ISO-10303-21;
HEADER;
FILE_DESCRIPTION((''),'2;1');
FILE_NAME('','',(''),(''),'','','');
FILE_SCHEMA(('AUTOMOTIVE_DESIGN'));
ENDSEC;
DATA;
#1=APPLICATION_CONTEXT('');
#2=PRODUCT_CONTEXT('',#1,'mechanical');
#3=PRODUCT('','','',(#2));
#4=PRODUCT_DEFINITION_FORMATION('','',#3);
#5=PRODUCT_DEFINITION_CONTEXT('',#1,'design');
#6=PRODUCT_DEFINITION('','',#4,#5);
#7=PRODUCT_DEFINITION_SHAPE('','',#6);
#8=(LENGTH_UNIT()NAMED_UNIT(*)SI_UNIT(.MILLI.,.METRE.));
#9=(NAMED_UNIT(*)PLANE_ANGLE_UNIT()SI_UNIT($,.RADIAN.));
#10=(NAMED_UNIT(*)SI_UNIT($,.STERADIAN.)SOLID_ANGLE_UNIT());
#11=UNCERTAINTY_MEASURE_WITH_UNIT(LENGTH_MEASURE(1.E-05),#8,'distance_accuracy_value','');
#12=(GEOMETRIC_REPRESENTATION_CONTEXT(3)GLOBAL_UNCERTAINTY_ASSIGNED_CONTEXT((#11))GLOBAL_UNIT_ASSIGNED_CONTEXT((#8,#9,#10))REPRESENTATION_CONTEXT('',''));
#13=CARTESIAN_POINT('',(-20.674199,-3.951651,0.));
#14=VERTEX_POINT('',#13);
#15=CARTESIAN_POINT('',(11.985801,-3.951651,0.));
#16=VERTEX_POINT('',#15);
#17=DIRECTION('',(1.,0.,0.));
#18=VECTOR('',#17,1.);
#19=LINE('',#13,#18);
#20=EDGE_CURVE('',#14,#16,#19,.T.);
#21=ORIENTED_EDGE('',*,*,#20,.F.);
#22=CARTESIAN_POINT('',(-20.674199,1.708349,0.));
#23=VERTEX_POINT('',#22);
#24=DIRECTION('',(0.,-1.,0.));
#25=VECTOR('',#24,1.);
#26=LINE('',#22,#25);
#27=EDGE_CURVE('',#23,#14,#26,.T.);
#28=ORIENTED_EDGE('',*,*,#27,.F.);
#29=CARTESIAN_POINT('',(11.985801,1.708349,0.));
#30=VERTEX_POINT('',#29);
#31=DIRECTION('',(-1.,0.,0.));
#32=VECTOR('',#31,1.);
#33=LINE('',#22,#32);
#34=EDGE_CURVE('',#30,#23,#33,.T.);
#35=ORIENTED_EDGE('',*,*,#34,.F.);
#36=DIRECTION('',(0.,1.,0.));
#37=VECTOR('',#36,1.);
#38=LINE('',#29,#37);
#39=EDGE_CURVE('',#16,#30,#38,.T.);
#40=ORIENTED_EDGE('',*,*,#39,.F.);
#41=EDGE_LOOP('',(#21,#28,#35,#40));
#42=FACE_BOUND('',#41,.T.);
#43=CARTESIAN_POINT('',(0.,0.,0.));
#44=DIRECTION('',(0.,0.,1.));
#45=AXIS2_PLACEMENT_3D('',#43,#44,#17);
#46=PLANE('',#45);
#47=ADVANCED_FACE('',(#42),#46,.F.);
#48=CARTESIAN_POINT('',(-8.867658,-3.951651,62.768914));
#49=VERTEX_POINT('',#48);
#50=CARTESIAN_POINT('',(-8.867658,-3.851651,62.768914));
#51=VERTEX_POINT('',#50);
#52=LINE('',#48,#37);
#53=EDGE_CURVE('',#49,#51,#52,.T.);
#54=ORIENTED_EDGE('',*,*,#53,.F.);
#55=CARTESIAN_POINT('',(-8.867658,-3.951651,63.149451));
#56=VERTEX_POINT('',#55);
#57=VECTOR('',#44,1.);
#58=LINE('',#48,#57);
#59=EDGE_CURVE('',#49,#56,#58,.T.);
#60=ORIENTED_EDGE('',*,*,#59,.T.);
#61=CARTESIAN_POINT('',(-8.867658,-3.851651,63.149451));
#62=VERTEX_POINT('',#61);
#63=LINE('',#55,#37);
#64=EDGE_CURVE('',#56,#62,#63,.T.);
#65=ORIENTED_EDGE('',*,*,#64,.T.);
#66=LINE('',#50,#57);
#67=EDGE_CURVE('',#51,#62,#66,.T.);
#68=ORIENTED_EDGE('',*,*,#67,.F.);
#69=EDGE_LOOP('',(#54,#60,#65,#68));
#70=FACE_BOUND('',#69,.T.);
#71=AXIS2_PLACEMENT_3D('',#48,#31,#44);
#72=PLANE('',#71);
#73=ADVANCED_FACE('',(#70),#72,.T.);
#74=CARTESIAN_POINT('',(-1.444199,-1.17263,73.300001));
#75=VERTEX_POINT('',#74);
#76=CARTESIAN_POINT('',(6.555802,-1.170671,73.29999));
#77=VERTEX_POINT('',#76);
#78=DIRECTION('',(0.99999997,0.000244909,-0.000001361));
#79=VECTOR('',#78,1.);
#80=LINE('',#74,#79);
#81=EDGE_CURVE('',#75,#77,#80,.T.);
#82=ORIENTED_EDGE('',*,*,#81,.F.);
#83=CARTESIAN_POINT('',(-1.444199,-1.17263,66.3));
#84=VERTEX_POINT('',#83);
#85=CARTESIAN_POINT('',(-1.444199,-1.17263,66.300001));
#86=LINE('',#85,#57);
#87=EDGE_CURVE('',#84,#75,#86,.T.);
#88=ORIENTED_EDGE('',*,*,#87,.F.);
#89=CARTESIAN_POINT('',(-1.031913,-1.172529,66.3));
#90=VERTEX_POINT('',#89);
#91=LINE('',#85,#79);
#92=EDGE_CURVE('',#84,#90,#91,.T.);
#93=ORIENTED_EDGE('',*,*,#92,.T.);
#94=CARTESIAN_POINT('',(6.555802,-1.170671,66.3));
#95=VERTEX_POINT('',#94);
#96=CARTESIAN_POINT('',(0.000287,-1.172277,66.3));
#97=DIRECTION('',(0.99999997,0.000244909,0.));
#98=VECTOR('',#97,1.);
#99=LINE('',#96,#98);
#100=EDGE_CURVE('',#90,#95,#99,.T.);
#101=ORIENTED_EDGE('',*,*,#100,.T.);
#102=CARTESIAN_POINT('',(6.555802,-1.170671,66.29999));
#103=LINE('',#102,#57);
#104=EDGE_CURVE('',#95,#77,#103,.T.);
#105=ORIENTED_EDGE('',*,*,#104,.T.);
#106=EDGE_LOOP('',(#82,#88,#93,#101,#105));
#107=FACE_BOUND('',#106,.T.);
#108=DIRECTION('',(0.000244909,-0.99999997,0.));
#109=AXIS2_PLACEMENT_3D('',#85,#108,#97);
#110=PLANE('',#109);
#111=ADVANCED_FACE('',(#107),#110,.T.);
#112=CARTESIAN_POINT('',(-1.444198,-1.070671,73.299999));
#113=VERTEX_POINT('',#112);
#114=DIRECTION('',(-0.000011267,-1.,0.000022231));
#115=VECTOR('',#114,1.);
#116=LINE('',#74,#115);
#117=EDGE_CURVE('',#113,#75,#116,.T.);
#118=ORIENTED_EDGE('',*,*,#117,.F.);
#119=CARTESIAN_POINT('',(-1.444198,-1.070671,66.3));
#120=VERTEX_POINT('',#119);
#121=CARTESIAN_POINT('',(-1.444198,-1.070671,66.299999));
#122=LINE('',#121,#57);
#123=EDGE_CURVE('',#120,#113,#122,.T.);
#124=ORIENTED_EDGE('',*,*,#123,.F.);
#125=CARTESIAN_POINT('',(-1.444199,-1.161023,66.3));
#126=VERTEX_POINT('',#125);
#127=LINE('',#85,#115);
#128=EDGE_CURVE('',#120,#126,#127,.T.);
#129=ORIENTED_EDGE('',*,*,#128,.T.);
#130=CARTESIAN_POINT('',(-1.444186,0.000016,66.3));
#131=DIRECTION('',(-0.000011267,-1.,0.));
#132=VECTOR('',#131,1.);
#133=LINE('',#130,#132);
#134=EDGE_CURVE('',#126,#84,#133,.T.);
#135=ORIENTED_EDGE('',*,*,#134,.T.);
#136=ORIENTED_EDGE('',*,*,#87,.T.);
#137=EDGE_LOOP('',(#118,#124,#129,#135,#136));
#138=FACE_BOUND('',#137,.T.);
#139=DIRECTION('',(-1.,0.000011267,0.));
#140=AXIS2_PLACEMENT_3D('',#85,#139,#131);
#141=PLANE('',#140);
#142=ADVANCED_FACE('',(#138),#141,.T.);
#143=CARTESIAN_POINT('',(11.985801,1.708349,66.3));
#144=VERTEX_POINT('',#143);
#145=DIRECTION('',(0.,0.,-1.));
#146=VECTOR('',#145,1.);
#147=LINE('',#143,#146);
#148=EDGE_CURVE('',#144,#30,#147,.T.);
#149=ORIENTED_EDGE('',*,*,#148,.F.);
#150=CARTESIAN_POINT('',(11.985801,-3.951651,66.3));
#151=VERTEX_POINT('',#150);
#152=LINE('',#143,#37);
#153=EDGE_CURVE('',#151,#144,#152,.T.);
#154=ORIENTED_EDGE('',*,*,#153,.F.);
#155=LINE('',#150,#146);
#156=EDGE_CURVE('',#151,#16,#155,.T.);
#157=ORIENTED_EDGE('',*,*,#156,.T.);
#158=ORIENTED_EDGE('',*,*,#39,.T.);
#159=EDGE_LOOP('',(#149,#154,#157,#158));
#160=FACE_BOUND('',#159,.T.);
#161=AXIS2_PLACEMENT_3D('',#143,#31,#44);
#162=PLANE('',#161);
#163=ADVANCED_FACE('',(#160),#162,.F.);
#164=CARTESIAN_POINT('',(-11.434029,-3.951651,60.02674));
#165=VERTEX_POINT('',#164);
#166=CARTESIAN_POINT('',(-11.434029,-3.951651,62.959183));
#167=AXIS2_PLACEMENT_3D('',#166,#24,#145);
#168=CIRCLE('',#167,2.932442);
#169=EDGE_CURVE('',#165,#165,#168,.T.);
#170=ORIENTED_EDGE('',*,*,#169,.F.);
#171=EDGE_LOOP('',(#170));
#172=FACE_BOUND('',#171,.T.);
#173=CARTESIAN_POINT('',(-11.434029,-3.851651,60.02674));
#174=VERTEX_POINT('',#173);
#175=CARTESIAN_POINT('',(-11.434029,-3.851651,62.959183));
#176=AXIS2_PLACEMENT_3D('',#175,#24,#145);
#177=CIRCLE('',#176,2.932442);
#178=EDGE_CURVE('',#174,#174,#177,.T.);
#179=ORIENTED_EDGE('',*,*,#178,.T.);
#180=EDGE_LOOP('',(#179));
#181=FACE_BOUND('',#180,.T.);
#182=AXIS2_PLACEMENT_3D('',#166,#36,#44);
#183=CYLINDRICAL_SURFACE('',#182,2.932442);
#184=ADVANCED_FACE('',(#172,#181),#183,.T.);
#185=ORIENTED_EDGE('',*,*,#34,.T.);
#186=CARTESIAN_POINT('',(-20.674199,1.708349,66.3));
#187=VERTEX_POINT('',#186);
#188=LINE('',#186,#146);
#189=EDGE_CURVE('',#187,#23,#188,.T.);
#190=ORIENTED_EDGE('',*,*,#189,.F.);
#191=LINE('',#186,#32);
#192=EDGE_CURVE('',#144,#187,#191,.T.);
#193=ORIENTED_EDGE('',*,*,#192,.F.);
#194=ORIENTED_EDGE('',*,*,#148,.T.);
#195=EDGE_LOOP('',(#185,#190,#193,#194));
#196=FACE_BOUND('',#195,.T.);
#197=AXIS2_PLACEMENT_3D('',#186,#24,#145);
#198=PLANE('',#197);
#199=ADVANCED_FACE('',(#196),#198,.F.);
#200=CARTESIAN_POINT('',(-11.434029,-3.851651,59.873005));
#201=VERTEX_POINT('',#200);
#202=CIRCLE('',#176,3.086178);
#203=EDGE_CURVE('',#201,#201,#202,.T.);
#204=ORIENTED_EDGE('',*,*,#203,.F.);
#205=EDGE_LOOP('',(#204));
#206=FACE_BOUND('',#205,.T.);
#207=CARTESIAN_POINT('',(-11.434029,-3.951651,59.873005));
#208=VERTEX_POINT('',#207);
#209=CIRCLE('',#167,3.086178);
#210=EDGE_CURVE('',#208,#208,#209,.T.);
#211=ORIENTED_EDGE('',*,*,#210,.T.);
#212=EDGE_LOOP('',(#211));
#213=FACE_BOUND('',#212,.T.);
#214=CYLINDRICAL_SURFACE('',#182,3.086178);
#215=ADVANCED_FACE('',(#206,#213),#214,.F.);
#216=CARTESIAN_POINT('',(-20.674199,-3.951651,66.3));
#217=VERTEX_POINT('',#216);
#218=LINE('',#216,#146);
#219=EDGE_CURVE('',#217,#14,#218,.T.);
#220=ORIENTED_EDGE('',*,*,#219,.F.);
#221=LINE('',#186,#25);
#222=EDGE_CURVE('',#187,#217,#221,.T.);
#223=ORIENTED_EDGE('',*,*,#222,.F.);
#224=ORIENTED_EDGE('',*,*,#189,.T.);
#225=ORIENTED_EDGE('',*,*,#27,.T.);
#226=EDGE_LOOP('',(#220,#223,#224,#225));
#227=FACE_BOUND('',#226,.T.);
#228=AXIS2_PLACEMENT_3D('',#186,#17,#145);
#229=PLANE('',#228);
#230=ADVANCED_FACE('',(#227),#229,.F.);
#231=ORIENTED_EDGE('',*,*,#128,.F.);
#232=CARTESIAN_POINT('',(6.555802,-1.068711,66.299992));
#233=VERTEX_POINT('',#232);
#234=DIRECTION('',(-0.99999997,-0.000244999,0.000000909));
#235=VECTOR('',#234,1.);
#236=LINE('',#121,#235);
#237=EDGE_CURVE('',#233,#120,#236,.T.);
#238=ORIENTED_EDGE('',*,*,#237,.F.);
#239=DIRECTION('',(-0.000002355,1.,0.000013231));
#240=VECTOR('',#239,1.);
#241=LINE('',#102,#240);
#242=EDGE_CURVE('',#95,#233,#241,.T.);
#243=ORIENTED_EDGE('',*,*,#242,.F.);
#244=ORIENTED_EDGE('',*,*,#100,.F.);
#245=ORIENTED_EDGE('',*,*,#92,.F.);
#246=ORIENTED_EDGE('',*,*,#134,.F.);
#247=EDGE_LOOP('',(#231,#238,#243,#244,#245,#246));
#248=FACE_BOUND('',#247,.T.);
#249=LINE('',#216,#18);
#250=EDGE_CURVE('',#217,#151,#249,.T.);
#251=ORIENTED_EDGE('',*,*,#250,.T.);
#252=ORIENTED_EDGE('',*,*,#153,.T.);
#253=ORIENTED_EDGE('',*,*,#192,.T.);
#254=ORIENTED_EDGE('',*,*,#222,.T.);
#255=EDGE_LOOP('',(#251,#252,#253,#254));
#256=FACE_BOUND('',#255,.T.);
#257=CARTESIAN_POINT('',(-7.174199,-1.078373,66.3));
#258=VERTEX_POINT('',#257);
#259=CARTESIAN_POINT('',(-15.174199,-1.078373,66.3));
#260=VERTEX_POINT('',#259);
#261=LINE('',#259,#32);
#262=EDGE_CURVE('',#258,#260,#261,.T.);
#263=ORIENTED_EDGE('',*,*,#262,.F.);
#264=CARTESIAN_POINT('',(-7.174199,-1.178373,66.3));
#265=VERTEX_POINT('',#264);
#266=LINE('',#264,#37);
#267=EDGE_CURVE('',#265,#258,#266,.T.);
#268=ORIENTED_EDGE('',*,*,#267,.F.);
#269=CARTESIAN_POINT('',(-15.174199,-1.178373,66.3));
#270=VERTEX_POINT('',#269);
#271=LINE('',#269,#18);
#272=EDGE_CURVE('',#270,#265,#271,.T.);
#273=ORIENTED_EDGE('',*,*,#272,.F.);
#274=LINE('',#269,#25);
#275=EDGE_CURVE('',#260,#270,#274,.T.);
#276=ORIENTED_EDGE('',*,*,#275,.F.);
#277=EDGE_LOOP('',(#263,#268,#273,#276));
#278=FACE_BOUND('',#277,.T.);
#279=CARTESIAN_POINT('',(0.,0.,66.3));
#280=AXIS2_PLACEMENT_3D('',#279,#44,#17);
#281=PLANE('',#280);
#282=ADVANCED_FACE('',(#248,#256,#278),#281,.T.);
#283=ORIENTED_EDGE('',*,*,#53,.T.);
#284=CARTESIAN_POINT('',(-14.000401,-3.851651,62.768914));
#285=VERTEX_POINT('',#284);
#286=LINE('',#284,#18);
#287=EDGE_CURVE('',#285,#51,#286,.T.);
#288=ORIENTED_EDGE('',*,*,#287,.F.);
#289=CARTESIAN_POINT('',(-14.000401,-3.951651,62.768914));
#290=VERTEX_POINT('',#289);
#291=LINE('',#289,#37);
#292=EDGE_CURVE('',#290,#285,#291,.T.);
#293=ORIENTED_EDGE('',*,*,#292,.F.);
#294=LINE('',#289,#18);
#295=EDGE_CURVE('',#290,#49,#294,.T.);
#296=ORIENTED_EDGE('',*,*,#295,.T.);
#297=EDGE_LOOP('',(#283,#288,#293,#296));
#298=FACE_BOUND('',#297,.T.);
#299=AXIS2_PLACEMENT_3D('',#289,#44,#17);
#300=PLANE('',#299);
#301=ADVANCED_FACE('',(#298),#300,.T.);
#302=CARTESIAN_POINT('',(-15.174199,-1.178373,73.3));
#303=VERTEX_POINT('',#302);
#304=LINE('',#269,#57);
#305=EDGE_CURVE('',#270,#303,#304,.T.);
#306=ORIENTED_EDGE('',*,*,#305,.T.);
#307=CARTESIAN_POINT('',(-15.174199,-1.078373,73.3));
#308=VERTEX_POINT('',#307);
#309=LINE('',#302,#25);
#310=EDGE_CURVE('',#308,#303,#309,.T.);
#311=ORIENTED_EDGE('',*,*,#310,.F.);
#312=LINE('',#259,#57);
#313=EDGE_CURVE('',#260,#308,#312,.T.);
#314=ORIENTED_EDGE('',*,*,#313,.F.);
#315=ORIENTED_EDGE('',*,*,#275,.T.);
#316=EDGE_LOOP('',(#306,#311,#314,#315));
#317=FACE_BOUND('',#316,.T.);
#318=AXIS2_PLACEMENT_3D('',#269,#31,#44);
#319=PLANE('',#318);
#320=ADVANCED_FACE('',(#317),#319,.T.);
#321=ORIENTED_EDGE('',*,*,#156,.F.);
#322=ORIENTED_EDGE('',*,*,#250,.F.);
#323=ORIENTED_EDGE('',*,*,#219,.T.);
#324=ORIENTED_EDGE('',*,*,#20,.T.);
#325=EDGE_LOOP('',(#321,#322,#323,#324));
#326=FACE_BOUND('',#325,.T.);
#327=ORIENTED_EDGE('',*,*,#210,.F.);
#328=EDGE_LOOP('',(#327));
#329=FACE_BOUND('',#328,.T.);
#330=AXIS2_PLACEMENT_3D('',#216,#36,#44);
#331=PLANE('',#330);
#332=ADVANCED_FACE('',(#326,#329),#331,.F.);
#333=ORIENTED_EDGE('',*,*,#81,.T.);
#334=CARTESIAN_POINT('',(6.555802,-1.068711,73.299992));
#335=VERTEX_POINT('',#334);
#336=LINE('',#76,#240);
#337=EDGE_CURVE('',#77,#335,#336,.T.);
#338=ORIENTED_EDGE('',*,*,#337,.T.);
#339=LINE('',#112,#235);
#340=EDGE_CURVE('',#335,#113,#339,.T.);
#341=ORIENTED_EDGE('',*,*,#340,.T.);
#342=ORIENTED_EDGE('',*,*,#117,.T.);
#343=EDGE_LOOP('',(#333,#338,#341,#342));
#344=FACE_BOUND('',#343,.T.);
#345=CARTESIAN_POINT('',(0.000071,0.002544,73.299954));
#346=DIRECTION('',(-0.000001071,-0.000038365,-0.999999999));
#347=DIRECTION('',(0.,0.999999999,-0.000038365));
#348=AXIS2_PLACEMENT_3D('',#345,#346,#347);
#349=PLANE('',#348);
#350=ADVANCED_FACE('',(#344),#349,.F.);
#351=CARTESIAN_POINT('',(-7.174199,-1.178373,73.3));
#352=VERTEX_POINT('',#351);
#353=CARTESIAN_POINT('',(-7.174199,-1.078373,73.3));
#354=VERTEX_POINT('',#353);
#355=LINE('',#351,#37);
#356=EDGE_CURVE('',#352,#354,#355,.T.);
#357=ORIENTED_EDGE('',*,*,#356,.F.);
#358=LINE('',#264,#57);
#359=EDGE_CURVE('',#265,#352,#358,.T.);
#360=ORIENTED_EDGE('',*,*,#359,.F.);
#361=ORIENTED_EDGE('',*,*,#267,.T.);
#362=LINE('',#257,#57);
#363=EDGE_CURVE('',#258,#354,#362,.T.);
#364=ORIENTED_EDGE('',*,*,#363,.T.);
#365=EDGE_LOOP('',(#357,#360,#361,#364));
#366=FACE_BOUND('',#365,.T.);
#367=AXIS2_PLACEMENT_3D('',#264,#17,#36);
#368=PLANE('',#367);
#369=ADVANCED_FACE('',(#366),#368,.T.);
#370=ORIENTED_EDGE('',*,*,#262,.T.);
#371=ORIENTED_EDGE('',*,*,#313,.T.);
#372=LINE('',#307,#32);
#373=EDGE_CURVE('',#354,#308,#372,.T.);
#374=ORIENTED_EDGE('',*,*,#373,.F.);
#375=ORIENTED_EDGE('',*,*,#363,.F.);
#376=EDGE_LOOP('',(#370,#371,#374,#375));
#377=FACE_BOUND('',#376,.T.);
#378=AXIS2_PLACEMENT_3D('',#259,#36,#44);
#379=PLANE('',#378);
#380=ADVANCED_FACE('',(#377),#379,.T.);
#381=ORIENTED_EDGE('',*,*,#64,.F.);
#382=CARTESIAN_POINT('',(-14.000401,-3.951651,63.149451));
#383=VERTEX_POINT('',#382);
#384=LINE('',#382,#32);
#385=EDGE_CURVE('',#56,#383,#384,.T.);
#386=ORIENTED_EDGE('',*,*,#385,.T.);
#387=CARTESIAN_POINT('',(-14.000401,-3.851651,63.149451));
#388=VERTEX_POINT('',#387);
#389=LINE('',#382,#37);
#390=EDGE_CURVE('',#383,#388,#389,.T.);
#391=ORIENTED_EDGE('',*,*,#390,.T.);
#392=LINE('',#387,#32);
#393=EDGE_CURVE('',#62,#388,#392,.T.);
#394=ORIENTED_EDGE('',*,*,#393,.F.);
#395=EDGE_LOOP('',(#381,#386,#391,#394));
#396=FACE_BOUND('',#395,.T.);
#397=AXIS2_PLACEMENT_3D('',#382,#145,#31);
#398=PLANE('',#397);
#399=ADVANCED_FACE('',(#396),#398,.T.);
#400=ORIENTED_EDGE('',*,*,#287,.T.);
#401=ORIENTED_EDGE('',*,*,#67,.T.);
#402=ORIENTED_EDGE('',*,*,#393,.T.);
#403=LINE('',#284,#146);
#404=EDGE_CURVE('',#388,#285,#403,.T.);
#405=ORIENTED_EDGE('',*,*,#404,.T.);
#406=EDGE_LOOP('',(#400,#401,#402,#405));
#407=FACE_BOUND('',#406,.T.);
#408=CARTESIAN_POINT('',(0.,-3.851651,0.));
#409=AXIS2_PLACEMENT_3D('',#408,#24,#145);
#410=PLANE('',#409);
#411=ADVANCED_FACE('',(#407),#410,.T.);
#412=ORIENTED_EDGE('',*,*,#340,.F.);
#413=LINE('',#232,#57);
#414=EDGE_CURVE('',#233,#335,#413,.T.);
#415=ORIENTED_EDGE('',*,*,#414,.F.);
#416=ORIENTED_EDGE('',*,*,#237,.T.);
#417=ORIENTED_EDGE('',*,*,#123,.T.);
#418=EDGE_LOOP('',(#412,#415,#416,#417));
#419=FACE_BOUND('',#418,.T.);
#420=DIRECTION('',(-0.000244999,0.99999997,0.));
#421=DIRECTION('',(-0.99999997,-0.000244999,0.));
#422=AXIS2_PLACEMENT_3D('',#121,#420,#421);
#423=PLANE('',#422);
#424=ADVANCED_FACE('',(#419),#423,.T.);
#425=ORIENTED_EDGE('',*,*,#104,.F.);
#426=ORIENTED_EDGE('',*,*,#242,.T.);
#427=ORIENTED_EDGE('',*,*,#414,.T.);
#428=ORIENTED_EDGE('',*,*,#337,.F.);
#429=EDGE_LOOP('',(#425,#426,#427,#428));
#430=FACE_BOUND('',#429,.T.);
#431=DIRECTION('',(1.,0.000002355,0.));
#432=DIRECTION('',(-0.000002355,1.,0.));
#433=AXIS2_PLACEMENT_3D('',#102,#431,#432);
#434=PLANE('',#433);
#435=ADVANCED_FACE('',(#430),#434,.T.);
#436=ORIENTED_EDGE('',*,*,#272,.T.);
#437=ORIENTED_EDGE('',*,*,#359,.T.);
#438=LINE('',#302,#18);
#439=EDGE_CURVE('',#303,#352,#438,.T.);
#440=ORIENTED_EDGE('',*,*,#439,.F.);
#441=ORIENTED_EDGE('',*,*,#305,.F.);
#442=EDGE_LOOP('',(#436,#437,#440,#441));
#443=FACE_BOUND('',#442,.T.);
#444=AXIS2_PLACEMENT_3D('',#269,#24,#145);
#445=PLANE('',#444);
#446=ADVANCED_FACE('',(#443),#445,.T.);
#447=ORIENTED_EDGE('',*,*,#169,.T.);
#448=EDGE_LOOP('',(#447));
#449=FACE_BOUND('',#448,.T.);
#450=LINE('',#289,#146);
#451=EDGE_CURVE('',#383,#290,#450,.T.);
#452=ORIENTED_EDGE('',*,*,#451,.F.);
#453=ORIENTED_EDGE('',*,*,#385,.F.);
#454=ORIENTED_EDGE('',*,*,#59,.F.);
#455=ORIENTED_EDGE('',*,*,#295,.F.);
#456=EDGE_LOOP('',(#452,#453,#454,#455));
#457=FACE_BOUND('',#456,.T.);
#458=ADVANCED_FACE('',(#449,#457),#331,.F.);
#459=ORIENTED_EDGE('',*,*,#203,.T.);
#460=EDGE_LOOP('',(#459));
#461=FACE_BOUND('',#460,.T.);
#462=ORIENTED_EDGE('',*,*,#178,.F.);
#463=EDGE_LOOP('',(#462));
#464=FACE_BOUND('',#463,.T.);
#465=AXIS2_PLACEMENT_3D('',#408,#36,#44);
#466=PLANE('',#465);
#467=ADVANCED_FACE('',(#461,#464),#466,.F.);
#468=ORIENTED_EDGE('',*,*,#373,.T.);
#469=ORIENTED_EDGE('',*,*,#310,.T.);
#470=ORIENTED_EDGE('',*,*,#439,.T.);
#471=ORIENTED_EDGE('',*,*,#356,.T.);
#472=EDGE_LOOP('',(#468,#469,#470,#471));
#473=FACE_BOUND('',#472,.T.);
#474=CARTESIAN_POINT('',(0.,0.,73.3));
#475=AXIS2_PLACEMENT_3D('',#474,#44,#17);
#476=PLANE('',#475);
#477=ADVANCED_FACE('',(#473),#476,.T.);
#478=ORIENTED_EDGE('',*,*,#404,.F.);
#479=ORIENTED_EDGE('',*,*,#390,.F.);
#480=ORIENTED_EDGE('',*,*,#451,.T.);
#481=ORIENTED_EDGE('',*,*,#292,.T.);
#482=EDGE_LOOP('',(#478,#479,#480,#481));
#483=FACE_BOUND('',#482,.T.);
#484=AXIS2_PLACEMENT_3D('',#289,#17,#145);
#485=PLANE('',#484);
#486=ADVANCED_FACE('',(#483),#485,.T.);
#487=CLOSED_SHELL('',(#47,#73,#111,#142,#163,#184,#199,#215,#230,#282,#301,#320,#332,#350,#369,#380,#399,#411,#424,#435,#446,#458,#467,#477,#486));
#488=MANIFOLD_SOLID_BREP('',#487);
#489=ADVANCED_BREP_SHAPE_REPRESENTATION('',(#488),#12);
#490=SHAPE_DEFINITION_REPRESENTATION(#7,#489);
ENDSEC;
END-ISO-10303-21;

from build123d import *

# Parameters (mm, degrees)
SKETCH1_W           = 32.66
SKETCH1_H           = 5.66
BOSS_EXTRUDE1_DEPTH = 66.3
BOSS_EXTRUDE3_DEPTH = 7
F_3DSKETCH2_R       = 3.086177745
F_3DSKETCH2_R_2     = 2.932442158
CUT_EXTRUDE1_DEPTH  = 0.1


with BuildPart() as part:
    # Sketch1 → Boss-Extrude1 (new body)
    with BuildSketch(Plane.XY):
        with Locations((-4.344198718, -1.121650641)):
            Rectangle(SKETCH1_W, SKETCH1_H)
    extrude(amount=BOSS_EXTRUDE1_DEPTH)


with BuildPart() as boss_extrude3_tool:
    # 3DSketch1 → Boss-Extrude3 (new, along a direction that is not the sketch's normal)
    with BuildSketch(Plane(origin=(-15.174198718, -1.178373292, 66.3), x_dir=(0.9999872662359682, 0.005046520163970641, -3.866762069669127e-07), z_dir=(-4.534508681961708e-07, 1.3230678756319878e-05, -0.9999999999123718))):
        Polygon((0, 0), (7.99989813, 0.040372161), (8.000402782, -0.059626565), (0.000504652, -0.099998727), align=None)
        Polygon((13.729853573, 0.063545778), (21.729762739, 0.101958696), (21.730277042, 0), (13.730369262, -0.038412192), align=None)
    extrude(amount=-BOSS_EXTRUDE3_DEPTH, dir=(0, 0, -1))


with BuildPart() as part_1:
    add(part.part)


with BuildPart() as part_2:
    # Boss-Extrude3: joined with boss_extrude3_tool
    add(part_1.part.fuse(boss_extrude3_tool.part, tol=0.00001))

    # 3DSketch2 → Cut-Extrude1 (cut)
    # profile 1 of 2: a face of its own
    with BuildSketch(Plane(origin=(-14.000400956, -3.951650641, 62.768913979), x_dir=(0.9972629704452686, 0, 0.07393624130749163), z_dir=(0, 1, 0))):
        with Locations((2.573415081, 0)):
            Circle(F_3DSKETCH2_R)
        with Locations((2.573415081, 0)):
            Circle(F_3DSKETCH2_R_2, mode=Mode.SUBTRACT)
    # profile 2 of 2: a face of its own
    with BuildSketch(Plane(origin=(-14.000400956, -3.951650641, 62.768913979), x_dir=(0.9972629704452686, 0, 0.07393624130749163), z_dir=(0, 1, 0))):
        Polygon((0, 0), (5.118694666, 0.379495735), (5.146830162, 0), (0.028135496, -0.379495735), align=None)
    extrude(amount=CUT_EXTRUDE1_DEPTH, mode=Mode.SUBTRACT)


solid = part_2.part
